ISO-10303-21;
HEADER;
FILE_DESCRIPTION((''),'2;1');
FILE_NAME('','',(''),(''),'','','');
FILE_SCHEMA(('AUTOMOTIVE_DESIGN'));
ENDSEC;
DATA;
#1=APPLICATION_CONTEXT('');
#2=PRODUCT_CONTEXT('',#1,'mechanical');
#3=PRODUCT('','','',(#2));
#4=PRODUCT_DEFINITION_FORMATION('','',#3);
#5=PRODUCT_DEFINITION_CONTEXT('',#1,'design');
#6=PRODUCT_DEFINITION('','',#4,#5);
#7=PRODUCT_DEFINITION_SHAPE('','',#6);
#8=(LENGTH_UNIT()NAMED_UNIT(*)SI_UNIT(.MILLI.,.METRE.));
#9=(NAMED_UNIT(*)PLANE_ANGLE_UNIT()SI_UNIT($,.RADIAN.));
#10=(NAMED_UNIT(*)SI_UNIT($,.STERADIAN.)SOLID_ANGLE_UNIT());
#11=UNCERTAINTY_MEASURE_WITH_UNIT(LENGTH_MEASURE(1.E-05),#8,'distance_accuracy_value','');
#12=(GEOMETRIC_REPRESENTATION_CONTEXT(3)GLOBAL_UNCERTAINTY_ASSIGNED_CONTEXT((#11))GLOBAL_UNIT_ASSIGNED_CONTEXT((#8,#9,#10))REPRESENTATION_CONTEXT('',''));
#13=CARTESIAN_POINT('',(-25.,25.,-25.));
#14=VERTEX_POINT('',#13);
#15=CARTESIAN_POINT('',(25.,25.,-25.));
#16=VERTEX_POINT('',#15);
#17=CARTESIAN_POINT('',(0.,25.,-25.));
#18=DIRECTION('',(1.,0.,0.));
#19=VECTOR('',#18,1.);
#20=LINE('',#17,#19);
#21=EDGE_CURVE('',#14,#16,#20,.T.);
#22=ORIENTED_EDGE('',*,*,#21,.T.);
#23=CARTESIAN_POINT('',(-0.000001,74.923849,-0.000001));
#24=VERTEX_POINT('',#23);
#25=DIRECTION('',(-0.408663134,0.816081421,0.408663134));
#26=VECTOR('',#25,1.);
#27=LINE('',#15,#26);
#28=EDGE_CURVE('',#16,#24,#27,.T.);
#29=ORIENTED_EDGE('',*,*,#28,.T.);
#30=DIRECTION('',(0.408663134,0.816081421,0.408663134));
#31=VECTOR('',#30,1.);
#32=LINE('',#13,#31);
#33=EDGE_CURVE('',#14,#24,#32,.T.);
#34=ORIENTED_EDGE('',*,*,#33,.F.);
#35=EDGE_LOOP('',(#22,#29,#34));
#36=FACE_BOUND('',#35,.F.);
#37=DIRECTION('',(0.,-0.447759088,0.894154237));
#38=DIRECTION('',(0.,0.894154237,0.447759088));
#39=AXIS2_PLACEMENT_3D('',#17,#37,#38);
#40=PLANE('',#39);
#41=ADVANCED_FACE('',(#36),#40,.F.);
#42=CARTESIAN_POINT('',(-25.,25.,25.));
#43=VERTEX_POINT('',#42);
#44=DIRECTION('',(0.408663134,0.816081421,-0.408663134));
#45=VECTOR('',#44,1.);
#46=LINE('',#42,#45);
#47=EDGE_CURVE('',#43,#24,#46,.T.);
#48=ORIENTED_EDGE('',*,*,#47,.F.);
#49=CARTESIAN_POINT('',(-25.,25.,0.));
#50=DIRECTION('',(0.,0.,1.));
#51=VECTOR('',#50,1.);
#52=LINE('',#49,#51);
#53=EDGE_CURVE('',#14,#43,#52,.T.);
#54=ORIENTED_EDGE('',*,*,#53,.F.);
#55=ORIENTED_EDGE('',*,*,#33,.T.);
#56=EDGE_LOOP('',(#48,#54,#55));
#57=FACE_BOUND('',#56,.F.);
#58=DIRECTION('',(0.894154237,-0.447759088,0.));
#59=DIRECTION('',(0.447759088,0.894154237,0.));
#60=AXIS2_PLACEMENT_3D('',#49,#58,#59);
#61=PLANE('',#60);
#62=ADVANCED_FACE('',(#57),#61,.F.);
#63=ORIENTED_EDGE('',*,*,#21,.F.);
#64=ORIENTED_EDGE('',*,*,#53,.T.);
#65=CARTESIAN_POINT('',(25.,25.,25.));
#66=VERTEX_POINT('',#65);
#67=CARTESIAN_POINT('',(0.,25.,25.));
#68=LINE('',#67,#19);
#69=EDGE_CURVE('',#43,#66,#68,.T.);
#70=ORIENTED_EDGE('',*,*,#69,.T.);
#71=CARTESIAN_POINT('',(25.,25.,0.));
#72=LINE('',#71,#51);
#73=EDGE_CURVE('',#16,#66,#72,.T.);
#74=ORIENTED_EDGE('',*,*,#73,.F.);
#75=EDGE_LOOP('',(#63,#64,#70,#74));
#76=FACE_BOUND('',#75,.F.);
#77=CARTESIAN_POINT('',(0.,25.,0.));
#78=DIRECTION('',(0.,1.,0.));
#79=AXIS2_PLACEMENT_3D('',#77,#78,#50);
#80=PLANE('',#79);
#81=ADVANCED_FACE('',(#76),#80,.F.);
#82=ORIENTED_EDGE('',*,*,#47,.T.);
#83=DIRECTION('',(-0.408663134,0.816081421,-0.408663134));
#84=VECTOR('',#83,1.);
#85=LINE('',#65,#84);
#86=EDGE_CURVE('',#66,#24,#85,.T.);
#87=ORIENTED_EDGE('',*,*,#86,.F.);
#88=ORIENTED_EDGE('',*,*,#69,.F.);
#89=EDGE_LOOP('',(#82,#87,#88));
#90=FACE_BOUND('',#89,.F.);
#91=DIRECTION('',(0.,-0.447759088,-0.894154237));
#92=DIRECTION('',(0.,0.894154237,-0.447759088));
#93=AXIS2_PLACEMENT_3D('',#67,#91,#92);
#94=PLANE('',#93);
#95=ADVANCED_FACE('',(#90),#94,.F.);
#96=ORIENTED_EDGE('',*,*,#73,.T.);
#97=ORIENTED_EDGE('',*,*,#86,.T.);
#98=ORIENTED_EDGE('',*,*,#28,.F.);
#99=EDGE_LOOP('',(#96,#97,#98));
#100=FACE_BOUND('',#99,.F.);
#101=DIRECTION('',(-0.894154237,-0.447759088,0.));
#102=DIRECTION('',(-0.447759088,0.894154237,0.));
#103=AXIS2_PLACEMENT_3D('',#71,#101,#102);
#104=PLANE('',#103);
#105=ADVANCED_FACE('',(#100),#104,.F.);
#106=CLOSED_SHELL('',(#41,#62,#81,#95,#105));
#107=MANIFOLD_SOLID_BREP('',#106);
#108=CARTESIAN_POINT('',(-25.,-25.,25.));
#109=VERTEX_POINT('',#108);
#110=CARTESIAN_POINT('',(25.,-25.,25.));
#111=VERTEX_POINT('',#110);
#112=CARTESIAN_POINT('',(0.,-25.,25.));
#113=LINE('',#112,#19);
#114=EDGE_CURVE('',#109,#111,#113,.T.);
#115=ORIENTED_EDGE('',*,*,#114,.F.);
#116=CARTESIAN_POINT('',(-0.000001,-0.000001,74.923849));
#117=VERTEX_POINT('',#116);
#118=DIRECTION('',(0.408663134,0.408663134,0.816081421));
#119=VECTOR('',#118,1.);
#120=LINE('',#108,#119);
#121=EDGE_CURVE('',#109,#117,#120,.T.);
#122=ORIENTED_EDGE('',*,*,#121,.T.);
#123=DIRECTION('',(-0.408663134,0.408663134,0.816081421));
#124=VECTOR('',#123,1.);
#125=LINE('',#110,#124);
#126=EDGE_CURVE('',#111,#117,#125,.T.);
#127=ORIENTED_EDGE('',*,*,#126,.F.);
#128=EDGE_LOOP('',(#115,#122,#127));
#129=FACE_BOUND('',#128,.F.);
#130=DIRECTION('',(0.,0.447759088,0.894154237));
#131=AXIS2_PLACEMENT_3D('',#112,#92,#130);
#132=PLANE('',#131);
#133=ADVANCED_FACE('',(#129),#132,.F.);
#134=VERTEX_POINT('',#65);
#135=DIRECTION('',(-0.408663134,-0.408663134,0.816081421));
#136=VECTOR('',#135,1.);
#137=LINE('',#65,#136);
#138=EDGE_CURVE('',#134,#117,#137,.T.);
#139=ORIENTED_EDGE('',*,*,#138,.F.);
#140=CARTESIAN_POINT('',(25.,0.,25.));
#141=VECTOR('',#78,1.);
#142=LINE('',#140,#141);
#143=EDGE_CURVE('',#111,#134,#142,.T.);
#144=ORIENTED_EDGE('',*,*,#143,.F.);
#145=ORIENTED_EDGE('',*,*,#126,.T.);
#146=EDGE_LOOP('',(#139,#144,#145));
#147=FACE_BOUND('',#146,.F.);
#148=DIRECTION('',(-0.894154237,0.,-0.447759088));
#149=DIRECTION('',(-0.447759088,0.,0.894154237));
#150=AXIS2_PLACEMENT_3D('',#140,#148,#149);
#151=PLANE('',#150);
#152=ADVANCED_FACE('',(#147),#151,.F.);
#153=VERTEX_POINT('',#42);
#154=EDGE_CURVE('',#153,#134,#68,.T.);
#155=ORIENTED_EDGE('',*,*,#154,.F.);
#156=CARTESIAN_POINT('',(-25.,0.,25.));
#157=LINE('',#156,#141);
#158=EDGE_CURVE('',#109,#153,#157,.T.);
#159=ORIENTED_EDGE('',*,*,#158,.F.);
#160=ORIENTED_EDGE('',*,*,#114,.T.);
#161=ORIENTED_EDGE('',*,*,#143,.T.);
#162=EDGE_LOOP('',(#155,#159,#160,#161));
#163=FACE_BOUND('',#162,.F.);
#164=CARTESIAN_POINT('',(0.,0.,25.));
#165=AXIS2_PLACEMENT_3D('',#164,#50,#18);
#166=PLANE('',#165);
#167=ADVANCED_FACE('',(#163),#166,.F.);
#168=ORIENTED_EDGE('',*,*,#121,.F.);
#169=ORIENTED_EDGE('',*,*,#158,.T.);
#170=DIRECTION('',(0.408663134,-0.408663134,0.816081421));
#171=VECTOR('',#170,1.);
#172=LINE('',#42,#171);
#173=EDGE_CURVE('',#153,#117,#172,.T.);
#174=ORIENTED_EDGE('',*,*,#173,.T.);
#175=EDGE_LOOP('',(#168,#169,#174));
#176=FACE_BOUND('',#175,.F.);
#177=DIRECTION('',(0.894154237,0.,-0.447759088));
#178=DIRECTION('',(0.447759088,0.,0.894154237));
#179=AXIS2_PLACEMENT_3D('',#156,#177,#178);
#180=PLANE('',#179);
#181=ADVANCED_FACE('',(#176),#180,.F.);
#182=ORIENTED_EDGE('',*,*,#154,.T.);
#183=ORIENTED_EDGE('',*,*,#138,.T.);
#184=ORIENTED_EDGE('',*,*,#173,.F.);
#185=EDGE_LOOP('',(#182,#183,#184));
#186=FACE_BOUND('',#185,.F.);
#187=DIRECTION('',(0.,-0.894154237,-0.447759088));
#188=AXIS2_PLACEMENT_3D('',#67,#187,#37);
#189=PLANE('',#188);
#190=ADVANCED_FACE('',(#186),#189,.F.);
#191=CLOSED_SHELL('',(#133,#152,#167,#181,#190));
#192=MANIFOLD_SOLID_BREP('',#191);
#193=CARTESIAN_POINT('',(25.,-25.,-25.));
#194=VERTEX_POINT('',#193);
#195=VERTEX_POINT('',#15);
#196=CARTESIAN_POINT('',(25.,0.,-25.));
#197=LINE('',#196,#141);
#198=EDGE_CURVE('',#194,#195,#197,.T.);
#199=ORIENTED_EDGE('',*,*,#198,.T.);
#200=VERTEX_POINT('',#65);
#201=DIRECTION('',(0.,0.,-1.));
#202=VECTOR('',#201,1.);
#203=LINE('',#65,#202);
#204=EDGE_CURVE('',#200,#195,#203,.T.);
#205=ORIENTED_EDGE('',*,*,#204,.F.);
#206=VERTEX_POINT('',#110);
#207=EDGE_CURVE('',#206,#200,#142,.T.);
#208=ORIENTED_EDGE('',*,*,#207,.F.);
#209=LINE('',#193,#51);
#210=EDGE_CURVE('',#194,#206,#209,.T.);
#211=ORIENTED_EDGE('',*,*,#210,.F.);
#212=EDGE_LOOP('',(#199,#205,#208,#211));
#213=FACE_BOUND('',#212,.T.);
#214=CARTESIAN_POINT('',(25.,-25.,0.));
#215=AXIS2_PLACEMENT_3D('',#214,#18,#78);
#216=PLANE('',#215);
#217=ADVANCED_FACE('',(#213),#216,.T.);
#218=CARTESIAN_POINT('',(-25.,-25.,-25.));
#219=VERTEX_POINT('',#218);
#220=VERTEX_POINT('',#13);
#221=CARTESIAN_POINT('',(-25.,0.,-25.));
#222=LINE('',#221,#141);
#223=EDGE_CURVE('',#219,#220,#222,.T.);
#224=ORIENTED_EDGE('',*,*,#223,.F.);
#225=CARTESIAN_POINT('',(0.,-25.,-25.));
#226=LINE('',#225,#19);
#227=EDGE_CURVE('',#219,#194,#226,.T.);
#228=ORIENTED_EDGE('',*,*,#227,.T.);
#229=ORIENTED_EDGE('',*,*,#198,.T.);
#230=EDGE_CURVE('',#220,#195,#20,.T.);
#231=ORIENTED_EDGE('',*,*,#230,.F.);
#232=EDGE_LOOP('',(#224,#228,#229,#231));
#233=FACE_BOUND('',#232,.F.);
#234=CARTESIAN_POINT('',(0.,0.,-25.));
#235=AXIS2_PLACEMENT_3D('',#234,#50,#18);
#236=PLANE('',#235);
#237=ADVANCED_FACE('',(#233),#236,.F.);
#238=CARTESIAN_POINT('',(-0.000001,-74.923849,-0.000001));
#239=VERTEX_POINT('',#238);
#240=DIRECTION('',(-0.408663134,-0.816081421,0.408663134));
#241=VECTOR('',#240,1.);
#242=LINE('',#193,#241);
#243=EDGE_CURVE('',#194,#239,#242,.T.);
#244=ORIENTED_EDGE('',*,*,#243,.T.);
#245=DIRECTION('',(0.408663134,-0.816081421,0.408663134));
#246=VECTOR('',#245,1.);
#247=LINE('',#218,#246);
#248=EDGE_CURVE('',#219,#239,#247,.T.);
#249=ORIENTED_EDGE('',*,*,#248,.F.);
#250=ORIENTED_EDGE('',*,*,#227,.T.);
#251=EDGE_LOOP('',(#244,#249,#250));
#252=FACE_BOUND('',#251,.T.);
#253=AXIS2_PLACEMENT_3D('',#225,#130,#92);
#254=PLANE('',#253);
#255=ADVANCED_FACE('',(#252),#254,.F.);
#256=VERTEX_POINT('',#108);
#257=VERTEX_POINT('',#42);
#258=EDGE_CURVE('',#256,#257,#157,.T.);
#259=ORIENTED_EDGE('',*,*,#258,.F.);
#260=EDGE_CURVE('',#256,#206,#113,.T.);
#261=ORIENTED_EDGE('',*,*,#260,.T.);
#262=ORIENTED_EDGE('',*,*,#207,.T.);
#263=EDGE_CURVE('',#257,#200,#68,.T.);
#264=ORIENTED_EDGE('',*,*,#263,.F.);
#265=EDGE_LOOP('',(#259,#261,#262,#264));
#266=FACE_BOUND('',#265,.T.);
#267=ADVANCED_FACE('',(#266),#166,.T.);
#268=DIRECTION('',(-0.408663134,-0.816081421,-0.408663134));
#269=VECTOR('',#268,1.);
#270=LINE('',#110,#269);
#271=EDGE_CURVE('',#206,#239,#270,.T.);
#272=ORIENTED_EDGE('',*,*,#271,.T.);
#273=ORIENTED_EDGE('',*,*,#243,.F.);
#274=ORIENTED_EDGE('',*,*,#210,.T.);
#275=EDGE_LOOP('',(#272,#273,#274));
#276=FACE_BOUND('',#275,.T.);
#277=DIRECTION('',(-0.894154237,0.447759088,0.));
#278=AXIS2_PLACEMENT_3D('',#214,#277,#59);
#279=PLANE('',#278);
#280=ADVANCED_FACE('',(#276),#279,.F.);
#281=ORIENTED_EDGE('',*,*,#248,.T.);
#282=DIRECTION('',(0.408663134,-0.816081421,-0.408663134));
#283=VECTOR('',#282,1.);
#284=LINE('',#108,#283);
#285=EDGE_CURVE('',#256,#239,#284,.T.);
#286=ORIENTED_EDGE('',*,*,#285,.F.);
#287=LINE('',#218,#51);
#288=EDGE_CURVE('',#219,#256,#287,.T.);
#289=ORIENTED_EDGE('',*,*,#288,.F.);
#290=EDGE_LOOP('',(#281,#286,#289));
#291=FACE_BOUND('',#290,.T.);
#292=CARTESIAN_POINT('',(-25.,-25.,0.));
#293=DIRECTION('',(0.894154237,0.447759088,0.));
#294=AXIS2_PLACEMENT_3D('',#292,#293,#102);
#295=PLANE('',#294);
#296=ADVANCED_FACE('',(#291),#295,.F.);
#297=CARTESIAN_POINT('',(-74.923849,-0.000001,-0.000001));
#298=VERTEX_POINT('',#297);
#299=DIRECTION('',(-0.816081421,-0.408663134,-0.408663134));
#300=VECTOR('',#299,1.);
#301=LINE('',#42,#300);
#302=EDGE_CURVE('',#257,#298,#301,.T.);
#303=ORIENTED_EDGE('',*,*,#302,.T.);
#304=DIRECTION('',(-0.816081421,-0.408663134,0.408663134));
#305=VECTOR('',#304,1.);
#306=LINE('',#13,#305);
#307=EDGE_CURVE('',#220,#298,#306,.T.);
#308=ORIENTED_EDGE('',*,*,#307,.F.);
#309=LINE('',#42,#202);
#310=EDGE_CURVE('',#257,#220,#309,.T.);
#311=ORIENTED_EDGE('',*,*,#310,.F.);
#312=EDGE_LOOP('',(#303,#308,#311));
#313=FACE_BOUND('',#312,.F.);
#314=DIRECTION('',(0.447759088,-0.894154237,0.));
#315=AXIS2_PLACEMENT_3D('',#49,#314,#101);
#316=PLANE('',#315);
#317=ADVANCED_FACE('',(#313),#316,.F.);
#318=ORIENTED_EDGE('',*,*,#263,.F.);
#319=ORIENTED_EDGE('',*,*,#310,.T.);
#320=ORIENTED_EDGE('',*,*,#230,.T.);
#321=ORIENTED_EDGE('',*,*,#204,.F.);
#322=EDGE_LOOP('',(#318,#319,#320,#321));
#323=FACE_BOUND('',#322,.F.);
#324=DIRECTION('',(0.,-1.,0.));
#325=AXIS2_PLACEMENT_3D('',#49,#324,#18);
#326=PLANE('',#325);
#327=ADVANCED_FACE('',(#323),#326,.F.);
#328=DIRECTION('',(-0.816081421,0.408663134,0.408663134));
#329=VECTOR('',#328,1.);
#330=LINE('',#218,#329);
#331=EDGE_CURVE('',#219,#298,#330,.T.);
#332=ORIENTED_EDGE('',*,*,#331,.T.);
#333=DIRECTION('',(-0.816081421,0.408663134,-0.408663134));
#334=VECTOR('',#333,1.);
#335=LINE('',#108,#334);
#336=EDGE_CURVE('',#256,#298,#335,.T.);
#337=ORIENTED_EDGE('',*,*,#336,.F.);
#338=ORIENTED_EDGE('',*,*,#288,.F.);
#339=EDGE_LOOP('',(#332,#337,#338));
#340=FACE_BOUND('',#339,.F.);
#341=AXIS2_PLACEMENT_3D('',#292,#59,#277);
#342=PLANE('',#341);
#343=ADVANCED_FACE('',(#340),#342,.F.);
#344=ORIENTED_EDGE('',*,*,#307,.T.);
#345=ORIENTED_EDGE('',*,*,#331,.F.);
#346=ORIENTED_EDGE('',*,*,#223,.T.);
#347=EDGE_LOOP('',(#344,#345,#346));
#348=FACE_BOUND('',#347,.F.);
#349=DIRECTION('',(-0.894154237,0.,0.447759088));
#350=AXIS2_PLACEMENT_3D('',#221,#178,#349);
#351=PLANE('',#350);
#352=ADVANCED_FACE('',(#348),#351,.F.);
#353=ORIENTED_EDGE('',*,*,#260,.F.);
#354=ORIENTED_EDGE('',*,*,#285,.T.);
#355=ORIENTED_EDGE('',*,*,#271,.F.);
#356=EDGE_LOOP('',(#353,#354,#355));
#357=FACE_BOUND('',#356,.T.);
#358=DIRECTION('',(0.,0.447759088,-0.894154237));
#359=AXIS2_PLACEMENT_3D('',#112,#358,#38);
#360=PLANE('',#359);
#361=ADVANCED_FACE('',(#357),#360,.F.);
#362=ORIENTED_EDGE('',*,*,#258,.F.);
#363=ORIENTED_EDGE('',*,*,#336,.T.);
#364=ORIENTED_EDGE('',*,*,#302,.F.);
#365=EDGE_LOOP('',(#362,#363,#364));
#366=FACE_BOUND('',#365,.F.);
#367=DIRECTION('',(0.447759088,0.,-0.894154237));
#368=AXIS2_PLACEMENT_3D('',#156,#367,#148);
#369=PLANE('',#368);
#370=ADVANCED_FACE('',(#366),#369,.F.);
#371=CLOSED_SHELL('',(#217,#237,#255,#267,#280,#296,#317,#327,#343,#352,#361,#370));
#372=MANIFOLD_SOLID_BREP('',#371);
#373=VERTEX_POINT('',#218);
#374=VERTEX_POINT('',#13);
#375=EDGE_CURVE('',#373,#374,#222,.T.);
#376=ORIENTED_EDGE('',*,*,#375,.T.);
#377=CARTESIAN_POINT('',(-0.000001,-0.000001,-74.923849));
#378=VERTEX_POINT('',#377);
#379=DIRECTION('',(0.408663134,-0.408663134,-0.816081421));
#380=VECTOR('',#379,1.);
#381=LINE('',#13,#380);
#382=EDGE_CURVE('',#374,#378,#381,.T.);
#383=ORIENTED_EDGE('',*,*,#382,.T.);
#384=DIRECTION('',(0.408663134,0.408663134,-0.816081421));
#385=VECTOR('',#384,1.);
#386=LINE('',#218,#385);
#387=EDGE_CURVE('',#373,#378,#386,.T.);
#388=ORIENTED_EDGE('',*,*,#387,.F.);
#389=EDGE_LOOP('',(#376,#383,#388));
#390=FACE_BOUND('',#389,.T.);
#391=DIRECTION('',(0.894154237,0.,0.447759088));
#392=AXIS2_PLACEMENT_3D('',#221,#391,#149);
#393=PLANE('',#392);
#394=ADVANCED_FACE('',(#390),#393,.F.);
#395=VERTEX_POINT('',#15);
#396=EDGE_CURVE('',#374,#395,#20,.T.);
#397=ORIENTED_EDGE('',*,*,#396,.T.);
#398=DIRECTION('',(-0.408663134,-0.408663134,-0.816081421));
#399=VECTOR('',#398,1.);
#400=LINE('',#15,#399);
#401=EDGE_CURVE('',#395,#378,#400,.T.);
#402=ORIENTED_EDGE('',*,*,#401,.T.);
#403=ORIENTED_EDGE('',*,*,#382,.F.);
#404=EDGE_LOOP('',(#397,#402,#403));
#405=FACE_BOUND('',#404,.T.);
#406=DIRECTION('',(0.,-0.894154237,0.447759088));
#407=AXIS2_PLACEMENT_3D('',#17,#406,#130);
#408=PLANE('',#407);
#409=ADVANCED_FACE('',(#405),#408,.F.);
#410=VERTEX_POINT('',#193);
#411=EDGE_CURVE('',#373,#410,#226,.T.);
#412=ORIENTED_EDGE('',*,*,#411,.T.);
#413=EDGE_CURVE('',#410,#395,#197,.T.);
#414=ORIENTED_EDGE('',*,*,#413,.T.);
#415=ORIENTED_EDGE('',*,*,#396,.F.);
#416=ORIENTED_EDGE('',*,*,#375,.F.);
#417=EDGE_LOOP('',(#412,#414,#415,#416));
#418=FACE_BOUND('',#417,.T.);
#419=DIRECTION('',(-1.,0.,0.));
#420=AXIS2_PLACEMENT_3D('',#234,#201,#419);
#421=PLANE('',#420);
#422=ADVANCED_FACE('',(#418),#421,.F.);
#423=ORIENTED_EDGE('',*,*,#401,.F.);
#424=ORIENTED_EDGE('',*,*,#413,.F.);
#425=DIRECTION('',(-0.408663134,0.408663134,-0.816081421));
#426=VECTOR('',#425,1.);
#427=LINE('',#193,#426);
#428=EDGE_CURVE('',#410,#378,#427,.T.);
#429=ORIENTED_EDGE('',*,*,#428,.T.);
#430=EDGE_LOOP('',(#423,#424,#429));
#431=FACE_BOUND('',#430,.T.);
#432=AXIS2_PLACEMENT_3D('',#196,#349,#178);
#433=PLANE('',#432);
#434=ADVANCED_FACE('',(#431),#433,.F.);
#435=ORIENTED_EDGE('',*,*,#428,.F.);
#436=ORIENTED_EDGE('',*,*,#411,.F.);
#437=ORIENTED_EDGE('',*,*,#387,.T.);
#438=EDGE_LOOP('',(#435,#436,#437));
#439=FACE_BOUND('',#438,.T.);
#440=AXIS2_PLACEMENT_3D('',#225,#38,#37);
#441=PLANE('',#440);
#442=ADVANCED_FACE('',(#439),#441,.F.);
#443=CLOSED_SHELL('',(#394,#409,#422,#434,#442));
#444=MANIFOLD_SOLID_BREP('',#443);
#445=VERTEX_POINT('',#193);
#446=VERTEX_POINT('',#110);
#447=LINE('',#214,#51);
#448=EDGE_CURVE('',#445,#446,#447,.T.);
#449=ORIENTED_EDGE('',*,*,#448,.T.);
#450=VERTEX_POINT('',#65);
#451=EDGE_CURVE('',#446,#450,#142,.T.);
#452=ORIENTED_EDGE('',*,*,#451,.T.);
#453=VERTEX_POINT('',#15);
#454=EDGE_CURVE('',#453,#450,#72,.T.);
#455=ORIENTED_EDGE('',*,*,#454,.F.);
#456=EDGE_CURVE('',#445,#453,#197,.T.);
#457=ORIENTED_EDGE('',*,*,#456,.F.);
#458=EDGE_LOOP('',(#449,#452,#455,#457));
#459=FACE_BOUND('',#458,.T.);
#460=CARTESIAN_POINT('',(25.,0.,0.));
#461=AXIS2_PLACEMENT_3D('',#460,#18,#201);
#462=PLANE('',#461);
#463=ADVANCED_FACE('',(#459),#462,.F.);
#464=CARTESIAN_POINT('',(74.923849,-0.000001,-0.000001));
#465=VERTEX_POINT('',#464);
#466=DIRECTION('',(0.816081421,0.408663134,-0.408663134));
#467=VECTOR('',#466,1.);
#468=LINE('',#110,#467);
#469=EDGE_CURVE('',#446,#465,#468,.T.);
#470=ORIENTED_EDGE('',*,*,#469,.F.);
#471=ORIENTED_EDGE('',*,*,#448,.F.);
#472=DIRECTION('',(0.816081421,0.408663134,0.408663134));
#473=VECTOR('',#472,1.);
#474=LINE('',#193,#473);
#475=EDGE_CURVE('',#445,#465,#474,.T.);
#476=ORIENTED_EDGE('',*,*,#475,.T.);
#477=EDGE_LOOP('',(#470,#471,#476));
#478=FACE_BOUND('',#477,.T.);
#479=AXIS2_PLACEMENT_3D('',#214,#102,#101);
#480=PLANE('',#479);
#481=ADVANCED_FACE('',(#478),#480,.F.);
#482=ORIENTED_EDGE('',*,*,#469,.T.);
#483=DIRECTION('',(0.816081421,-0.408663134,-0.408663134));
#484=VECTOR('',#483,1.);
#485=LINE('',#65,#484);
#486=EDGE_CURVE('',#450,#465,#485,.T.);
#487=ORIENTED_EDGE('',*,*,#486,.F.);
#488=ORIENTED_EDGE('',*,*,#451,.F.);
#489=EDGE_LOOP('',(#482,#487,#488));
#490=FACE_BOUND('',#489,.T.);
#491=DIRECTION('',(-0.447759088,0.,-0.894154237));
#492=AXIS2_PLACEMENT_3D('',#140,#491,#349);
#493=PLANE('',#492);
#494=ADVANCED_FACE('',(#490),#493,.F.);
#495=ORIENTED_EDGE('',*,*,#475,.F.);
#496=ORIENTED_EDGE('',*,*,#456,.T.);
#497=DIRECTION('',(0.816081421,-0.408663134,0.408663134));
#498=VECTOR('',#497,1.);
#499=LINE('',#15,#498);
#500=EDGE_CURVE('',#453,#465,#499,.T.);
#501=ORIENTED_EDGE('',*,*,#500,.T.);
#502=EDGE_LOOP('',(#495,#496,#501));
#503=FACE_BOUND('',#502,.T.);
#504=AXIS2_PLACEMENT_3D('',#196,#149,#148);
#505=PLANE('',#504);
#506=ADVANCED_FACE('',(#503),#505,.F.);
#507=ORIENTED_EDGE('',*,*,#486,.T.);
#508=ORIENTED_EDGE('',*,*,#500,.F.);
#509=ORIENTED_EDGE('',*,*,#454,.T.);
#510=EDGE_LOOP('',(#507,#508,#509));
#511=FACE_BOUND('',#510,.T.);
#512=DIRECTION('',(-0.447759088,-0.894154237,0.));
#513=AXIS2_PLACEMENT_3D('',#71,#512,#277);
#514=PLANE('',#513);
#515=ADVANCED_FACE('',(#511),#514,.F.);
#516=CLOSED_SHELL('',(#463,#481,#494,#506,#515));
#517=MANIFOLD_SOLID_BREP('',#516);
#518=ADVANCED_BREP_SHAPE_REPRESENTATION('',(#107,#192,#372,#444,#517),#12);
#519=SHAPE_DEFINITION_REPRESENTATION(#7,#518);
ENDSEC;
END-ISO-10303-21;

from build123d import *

# Parameters (mm, degrees)
F0_W     = 50
F0_H     = 50
F1_DEPTH = 25
F2_W     = 50
F2_H     = 50
F3_DEPTH = 50
F3_TAPER = 26.6


with BuildPart() as f1:
    # F0 (on Top) → F1 (new body, symmetric)
    with BuildSketch(Plane.XY):
        Rectangle(F0_W, F0_H)
    extrude(amount=F1_DEPTH, both=True)



with BuildPart() as f3:
    # F2 (on face) → F3 (new body)
    with BuildSketch(Plane.XY.offset(25)):
        Rectangle(F2_W, F2_H)
    extrude(amount=F3_DEPTH, taper=F3_TAPER)


with BuildPart() as f4_1:
    # F4: instance of F3
    add(f3.part.mirror(Plane.XY))


with BuildPart() as f6_1:
    # F6: instance of F3
    add(f3.part.mirror(Plane(origin=(25, -25, 25), x_dir=(-0.5773502692, 0.5773502692, -0.5773502692), z_dir=(0.7071067812, 0, -0.7071067812))))


with BuildPart() as f7_1:
    # F7: instance of F4_1
    add(f4_1.part.mirror(Plane(origin=(25, -25, 25), x_dir=(-0.5773502692, 0.5773502692, -0.5773502692), z_dir=(0.7071067812, 0, -0.7071067812))))


with BuildPart() as f9_1:
    # F9: instance of F6_1
    add(f6_1.part.mirror(Plane(origin=(25, 25, 25), x_dir=(-0.5773502692, -0.5773502692, -0.5773502692), z_dir=(0.7071067812, -0.7071067812, 0))))


with BuildPart() as f1_1:
    add(f1.part)

    add(f7_1.part)  # F10 merges F7_1
    # F10: F7_1 across plane
    add(f7_1.part.mirror(Plane(origin=(25, 25, 25), x_dir=(-0.5773502692, -0.5773502692, -0.5773502692), z_dir=(0.7071067812, -0.7071067812, 0))))


solid = Compound([f3.part, f4_1.part, f6_1.part, f9_1.part, f1_1.part])
